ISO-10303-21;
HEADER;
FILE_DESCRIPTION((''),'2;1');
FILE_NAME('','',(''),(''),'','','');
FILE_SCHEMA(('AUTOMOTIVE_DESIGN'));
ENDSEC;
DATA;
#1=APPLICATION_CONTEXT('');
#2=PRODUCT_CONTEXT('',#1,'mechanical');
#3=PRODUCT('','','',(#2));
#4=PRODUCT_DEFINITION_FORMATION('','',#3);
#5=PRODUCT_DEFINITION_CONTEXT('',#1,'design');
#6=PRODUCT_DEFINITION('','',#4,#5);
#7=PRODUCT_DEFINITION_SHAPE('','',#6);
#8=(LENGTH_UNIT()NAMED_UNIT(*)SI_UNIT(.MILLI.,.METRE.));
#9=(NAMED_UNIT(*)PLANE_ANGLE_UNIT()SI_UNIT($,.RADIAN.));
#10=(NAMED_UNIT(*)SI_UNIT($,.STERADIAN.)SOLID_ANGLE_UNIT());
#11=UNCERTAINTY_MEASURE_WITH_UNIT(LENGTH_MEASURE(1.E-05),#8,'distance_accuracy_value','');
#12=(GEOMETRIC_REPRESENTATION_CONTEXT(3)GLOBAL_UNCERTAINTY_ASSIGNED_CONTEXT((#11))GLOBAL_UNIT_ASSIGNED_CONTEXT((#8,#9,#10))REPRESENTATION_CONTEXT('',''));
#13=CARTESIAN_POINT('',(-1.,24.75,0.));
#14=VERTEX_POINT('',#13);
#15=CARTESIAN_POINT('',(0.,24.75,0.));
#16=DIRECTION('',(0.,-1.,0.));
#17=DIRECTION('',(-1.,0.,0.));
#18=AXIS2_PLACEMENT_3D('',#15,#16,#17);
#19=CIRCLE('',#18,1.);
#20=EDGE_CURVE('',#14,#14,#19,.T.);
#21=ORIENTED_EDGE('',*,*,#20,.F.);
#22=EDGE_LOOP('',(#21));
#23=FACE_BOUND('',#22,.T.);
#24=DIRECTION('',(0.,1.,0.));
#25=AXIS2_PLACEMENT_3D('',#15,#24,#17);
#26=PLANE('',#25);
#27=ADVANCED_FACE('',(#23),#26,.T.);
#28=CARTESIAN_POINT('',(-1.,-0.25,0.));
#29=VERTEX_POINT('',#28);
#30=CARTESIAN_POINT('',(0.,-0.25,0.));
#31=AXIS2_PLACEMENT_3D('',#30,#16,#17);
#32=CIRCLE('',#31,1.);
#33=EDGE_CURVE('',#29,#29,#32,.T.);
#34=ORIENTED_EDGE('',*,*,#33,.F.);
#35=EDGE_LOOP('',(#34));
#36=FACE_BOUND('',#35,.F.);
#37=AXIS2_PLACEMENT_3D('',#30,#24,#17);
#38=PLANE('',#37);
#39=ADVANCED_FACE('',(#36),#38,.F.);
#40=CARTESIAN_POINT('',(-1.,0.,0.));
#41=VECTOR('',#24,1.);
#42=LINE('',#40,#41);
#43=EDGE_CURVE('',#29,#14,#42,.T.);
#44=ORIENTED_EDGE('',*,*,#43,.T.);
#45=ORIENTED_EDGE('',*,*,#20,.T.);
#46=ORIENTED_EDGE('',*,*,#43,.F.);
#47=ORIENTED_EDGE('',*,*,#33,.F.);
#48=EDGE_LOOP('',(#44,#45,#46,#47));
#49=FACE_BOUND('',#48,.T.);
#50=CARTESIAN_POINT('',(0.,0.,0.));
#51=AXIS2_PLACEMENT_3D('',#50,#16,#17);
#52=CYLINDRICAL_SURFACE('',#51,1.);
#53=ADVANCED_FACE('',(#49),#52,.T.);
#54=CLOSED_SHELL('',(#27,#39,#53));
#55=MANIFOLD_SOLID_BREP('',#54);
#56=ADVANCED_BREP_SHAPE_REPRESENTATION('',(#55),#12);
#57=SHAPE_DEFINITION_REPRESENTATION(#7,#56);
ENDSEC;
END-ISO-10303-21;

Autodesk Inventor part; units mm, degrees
ref_plane "YZ Plane" through (0, 0, 0) normal (1, 0, 0) x (0, 1, 0)
ref_plane "XZ Plane" through (0, 0, 0) normal (0, 1, 0) x (-1, 0, 0)
ref_plane "XY Plane" through (0, 0, 0) normal (0, 0, 1) x (1, 0, 0)
sketch "Sketch1" plane through (0, 0, 0) normal (0, 1, 0) x (-1, 0, 0)
  circle A0 centre (0, 0) radius 1
  dimension "d0" = 2
extrude "Extrusion1" add sketch "Sketch1" along normal blind 26
ref_plane "Work Plane1" through (0, -30, 0) normal (0, -1, 0) x (1, 0, 0)
move faces "Move1" translate (0, -0.25, 0) faces at (-0.5848, 0, -0.397)
move faces "Move2" translate (0, -0.93, 0) faces at (-0.2495, 26, 0.221)
move faces "Move3" translate (0, -0.32, 0) faces at (-0.2495, 25.07, 0.221)
properties part number "LOOP3_COLL"
